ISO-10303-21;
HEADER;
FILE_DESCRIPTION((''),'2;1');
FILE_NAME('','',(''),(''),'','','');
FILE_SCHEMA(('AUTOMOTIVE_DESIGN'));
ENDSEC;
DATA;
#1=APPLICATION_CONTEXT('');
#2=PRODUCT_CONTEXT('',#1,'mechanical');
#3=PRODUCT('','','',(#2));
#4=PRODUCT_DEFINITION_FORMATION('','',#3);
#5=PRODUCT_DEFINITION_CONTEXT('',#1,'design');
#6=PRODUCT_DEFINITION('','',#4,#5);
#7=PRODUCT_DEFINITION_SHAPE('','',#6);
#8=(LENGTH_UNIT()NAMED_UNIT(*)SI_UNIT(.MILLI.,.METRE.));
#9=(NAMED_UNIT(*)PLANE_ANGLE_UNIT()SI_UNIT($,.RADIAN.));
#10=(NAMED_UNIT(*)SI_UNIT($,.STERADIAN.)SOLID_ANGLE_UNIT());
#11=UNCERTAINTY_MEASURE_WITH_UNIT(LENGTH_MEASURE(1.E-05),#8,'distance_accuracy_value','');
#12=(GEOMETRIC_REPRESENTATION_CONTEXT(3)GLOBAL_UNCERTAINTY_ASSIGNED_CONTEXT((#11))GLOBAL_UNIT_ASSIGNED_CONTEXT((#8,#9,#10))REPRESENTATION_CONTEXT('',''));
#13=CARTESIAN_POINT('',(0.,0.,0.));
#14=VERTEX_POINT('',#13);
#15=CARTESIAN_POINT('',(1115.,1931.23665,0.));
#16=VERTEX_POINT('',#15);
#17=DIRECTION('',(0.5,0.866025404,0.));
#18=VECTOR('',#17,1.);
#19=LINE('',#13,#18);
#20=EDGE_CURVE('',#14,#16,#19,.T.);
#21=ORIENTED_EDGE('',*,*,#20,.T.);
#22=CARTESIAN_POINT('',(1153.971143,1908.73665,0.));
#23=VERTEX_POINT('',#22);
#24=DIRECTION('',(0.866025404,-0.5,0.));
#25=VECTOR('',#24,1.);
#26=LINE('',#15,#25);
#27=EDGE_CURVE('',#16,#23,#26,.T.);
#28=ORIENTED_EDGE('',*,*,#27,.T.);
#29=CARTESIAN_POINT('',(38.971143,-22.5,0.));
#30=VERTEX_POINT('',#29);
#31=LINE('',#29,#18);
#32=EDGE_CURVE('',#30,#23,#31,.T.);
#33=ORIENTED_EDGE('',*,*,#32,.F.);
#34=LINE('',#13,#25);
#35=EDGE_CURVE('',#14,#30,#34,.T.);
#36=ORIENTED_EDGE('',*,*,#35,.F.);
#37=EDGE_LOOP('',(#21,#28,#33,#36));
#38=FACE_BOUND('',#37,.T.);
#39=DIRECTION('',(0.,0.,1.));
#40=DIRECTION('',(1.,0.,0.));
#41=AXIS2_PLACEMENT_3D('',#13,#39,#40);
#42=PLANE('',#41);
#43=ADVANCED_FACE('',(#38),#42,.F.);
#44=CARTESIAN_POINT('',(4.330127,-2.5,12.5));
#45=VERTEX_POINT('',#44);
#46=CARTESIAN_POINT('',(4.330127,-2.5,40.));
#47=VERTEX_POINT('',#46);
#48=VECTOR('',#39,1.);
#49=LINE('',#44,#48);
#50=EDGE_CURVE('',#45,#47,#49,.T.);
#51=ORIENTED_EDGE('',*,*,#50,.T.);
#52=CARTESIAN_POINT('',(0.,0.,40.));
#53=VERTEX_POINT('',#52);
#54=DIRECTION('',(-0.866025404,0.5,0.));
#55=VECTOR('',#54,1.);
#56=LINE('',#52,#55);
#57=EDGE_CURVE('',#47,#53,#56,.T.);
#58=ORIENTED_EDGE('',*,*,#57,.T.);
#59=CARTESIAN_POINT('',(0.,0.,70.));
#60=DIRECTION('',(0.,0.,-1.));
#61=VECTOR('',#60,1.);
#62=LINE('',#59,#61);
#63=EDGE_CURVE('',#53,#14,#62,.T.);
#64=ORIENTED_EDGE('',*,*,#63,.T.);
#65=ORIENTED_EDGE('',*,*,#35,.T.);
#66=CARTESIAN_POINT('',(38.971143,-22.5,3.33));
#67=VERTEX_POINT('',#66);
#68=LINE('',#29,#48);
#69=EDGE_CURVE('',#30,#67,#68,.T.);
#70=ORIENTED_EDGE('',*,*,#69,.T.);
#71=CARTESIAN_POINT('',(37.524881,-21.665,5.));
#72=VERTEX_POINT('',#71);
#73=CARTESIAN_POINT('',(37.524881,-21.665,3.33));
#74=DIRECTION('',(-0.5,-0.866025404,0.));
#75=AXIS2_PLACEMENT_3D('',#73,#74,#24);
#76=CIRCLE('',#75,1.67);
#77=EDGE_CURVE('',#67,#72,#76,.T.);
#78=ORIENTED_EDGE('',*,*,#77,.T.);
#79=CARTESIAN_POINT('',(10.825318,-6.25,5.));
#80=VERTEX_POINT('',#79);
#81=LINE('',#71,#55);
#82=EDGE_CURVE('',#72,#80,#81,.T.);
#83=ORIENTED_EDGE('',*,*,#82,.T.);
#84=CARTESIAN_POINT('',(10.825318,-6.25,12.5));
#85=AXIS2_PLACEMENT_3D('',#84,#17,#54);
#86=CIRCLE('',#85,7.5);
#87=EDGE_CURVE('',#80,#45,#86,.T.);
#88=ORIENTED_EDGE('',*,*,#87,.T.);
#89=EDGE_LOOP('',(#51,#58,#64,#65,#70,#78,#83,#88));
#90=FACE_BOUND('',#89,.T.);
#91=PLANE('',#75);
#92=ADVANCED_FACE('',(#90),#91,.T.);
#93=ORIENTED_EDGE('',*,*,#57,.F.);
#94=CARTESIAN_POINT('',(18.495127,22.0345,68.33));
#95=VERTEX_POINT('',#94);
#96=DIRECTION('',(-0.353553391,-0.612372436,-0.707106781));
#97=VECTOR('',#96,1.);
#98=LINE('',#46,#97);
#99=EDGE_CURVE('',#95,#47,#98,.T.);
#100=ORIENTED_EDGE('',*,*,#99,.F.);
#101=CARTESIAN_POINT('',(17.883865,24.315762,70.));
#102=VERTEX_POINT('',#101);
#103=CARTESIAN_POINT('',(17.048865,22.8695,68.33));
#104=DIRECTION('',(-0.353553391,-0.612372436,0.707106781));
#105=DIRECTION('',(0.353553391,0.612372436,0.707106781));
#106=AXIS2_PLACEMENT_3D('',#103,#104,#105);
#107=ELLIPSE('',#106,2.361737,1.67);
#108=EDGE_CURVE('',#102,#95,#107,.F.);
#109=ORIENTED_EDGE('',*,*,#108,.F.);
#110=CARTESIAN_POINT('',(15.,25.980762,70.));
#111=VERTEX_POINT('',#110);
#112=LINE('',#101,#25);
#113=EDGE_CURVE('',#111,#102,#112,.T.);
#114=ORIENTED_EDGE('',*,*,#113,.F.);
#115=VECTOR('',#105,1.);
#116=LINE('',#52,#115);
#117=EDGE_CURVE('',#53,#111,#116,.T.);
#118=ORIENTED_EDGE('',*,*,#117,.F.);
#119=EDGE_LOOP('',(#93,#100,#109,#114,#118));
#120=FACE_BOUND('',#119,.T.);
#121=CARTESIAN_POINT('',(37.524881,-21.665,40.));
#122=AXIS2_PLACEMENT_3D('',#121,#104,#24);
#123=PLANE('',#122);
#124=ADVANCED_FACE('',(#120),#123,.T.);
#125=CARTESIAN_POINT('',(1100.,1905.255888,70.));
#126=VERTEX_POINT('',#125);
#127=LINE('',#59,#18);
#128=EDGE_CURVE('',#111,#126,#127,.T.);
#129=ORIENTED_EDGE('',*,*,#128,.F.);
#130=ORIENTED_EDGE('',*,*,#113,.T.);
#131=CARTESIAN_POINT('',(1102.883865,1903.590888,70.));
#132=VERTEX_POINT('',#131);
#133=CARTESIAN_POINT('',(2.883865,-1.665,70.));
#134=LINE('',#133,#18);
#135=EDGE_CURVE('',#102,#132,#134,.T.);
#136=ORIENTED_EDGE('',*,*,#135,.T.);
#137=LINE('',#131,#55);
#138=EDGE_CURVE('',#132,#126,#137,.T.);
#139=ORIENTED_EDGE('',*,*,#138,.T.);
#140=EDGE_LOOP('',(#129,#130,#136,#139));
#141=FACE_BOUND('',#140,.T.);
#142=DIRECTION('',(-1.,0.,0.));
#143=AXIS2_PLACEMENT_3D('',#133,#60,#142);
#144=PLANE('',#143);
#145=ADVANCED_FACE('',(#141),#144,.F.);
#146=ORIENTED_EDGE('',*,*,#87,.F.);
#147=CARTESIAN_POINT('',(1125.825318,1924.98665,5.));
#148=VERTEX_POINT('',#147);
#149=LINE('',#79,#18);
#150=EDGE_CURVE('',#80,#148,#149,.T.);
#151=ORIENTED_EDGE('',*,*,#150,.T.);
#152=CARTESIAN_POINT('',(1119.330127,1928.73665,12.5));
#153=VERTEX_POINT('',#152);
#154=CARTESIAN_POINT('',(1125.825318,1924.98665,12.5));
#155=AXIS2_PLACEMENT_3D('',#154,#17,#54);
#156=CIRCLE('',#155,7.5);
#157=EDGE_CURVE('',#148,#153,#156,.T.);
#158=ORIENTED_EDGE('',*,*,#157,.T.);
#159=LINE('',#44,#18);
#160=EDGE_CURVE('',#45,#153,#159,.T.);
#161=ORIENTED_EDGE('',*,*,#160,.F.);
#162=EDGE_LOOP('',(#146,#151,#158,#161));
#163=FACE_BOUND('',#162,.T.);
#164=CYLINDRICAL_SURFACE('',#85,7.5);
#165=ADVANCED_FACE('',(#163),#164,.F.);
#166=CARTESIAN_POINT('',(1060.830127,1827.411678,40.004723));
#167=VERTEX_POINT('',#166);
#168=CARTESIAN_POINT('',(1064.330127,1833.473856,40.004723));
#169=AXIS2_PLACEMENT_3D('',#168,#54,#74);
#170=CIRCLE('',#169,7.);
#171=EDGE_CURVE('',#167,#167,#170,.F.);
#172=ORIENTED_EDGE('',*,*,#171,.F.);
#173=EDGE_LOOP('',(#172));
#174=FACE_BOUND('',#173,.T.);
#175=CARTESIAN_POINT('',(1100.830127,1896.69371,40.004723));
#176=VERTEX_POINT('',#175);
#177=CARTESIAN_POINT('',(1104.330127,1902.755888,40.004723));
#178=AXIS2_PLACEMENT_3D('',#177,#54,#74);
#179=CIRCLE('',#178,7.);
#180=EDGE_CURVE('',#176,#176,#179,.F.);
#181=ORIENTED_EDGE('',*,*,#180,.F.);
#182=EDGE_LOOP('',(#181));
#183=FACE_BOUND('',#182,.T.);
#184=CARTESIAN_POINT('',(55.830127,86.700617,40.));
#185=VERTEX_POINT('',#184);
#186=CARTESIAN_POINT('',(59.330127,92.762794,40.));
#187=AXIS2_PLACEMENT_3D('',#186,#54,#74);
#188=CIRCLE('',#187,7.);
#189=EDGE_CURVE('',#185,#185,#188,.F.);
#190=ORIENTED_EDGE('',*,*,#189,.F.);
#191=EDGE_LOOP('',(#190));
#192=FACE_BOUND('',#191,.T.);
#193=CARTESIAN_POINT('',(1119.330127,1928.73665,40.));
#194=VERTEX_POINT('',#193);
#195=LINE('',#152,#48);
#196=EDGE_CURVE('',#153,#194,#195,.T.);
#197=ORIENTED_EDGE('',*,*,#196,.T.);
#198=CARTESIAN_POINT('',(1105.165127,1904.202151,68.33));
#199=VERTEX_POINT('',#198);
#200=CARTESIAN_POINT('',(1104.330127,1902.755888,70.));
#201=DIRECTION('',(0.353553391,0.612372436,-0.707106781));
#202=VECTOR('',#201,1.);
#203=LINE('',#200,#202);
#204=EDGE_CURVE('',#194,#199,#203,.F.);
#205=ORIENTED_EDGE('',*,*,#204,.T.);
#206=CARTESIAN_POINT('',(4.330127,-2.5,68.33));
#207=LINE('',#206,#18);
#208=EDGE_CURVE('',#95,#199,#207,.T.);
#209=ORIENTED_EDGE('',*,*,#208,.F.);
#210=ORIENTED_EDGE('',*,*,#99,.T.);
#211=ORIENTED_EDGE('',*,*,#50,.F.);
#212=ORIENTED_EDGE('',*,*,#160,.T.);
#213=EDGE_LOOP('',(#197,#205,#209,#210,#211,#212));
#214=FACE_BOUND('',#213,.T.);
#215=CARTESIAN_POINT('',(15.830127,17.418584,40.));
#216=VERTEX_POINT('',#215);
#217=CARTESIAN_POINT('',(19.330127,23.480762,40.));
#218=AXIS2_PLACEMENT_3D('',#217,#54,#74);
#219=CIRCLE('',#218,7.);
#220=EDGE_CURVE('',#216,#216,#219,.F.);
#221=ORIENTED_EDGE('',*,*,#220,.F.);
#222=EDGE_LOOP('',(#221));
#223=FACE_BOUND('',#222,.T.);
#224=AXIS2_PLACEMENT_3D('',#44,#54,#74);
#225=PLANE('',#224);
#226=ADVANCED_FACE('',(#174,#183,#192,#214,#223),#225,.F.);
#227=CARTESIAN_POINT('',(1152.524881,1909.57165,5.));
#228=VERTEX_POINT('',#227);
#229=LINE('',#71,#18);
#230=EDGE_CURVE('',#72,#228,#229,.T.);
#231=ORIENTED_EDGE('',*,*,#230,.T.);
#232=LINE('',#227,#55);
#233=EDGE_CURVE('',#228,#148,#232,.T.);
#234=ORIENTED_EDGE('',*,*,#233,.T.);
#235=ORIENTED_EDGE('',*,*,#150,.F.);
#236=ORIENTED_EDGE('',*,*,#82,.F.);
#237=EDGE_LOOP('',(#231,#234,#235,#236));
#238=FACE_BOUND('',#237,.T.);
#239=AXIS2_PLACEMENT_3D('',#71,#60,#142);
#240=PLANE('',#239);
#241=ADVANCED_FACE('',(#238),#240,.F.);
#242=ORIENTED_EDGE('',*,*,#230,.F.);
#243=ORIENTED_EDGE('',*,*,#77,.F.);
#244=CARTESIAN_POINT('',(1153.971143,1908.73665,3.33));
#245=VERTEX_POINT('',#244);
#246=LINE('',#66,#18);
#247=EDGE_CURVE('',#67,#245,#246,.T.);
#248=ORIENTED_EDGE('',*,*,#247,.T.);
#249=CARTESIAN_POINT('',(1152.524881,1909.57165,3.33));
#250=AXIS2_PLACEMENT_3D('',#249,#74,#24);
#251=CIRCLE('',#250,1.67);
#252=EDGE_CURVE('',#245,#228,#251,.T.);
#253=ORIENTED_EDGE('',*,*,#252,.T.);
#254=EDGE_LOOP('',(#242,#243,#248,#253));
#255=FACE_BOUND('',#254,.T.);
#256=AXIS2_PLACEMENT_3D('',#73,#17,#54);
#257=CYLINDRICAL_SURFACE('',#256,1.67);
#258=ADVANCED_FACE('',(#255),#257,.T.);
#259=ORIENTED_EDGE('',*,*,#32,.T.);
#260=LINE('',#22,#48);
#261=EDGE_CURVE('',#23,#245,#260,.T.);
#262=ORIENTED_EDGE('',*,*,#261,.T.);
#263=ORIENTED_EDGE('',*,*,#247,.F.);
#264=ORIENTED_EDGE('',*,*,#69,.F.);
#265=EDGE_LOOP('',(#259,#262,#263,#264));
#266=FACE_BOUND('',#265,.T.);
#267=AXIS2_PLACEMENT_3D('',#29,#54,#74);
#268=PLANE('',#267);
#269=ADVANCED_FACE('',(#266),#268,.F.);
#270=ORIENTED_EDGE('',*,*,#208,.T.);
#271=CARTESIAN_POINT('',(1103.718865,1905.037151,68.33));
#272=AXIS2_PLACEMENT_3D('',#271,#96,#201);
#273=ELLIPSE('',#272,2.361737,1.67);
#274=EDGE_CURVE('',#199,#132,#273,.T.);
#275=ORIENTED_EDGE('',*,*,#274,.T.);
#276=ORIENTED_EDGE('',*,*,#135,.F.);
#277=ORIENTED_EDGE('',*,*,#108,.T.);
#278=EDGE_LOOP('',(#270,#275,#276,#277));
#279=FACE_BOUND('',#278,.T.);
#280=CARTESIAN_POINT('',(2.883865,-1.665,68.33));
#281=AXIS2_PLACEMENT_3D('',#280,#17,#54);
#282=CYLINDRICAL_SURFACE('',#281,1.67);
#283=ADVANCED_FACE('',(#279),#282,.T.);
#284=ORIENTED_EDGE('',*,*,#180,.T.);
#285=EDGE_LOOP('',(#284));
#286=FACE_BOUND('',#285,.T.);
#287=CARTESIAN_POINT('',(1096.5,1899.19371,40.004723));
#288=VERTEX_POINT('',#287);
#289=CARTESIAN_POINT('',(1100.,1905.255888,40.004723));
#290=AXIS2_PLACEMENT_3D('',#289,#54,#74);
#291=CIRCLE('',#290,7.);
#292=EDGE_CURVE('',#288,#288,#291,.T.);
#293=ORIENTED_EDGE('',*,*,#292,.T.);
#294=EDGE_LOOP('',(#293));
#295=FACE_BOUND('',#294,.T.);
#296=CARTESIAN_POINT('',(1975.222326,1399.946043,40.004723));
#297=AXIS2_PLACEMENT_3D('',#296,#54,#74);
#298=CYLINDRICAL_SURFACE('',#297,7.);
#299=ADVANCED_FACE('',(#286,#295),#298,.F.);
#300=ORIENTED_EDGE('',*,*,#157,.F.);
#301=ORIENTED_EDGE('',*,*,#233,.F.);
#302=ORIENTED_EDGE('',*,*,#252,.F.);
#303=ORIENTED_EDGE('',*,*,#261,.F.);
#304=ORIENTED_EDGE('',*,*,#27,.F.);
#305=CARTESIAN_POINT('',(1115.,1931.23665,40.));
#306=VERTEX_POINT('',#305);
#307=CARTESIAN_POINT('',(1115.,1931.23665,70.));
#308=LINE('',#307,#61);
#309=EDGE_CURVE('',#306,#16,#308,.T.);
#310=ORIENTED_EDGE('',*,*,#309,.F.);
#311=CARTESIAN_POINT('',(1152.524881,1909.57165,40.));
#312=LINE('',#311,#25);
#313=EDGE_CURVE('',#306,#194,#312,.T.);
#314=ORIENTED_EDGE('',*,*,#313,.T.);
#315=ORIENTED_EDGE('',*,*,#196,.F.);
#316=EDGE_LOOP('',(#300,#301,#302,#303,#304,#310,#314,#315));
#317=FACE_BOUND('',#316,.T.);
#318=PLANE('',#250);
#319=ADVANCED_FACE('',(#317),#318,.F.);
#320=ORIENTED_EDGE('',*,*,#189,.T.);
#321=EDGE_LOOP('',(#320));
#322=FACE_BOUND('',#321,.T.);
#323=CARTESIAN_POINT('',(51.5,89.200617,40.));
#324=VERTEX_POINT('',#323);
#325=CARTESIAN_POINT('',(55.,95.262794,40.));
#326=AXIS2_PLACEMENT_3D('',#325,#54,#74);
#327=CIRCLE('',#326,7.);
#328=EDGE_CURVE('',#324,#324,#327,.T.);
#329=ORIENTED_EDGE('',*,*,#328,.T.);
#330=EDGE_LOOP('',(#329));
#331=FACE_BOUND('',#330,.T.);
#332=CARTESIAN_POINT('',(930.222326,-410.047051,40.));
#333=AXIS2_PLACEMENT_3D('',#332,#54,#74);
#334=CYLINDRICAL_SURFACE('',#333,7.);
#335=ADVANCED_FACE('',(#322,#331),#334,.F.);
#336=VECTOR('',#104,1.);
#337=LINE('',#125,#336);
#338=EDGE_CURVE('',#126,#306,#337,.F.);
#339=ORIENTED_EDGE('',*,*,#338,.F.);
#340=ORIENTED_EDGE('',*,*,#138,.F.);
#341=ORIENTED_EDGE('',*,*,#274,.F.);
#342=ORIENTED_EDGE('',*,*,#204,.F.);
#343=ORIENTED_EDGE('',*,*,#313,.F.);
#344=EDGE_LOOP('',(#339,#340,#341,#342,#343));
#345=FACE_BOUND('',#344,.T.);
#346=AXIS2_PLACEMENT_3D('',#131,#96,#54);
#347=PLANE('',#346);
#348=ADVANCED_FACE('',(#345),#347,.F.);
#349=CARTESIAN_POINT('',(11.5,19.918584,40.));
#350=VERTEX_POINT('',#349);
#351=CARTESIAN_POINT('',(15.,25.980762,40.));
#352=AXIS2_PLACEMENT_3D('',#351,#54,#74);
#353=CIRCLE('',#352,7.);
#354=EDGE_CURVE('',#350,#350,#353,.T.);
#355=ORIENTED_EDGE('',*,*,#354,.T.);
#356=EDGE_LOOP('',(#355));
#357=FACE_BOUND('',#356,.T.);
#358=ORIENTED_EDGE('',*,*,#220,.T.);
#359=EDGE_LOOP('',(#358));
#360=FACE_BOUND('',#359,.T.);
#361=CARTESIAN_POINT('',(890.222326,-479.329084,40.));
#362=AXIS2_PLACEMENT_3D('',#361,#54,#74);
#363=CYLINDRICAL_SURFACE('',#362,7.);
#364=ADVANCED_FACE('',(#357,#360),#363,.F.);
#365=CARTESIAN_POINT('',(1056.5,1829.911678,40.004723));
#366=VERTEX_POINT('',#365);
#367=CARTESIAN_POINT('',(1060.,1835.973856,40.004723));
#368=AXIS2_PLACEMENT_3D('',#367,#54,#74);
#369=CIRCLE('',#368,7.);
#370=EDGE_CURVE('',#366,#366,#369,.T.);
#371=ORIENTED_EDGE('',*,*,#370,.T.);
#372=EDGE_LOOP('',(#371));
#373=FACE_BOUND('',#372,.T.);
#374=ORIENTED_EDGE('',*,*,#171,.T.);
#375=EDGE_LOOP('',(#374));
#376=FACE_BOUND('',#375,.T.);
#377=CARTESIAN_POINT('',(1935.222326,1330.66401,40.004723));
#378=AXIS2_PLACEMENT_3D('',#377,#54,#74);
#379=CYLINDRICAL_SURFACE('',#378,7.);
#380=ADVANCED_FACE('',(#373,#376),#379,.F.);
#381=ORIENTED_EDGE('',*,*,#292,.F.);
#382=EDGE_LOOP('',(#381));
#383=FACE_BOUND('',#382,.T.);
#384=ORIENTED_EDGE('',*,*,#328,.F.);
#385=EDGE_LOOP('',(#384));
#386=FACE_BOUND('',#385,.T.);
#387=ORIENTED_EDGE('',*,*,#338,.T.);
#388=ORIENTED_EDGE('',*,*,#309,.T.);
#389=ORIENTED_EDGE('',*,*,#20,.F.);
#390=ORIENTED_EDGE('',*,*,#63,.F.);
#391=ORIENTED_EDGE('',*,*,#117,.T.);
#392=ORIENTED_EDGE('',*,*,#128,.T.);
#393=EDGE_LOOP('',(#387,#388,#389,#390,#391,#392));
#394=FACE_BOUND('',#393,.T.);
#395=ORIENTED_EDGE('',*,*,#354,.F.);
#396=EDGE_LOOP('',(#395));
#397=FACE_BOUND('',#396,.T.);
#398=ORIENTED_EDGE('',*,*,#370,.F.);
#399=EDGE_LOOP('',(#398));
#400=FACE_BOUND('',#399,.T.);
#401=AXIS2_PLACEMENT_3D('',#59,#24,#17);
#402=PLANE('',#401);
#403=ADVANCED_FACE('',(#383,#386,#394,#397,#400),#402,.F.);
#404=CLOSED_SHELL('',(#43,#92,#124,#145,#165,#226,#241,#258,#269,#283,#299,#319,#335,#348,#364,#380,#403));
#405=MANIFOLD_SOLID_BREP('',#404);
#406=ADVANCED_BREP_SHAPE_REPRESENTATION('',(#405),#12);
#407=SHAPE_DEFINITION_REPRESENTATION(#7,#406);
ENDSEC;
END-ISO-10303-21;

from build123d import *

# Parameters (mm, degrees)
F_70X45X5_1_DEPTH   = 2230
CUT_EXTRUDE_1_REACH = 2252.827
SKETCH_12_R         = 7
CUT_EXTRUDE_2_REACH = 2252.827
SKETCH_13_R         = 7
CHAMFER_1_SIZE      = 30
CHAMFER_2_SIZE      = 30


with BuildPart() as part:
    # 草图11 → 不等边角钢 70X45X5(1) (new body)
    with BuildSketch(Plane(origin=(1115, 1931.236650439, 0), x_dir=(0.86602540378444, -0.49999999999999784, 0), z_dir=(-0.49999999999999784, -0.86602540378444, 0))):
        with BuildLine():
            Line((0, 70), (0, 0))
            Line((0, 0), (45, 0))
            Line((45, 0), (45, 3.33))
            ThreePointArc((45, 3.33), (44.510868325, 4.510868325), (43.33, 5))
            Line((43.33, 5), (12.5, 5))
            ThreePointArc((12.5, 5), (7.196699141, 7.196699141), (5, 12.5))
            Line((5, 12.5), (5, 68.33))
            ThreePointArc((5, 68.33), (4.510868325, 69.510868325), (3.33, 70))
            Line((3.33, 70), (0, 70))
        make_face()
    extrude(amount=F_70X45X5_1_DEPTH)

    # 草图12 → 切除-拉伸1 (cut, up to next)
    with BuildSketch(Plane(origin=(0, 0, 0), x_dir=(0, 0, 1), z_dir=(-0.86602540378444, 0.49999999999999784, 0)), mode=Mode.PRIVATE) as cut_extrude_1_sk1:
        with Locations(Location((40, 30, 0), (0, 0, 270))):
            Circle(SKETCH_12_R)
    cut_extrude_1_tool1 = extrude(cut_extrude_1_sk1.sketch, amount=-CUT_EXTRUDE_1_REACH, mode=Mode.PRIVATE) & part.part
    # 草图12 → 切除-拉伸1 (cut, up to next)
    with BuildSketch(Plane(origin=(0, 0, 0), x_dir=(0, 0, 1), z_dir=(-0.86602540378444, 0.49999999999999784, 0)), mode=Mode.PRIVATE) as cut_extrude_1_sk2:
        with Locations(Location((40, 110, 0), (0, 0, 270))):
            Circle(SKETCH_12_R)
    cut_extrude_1_tool2 = extrude(cut_extrude_1_sk2.sketch, amount=-CUT_EXTRUDE_1_REACH, mode=Mode.PRIVATE) & part.part
    add(cut_extrude_1_tool1.solids().sort_by_distance((15, 25.980762, 40))[0], mode=Mode.SUBTRACT)
    add(cut_extrude_1_tool2.solids().sort_by_distance((55, 95.262794, 40))[0], mode=Mode.SUBTRACT)

    # 草图13 → 切除-拉伸2 (cut, up to next)
    with BuildSketch(Plane(origin=(0, 0, 0), x_dir=(0, 0, 1), z_dir=(-0.86602540378444, 0.49999999999999784, 0)), mode=Mode.PRIVATE) as cut_extrude_2_sk1:
        with Locations(Location((40.004723234, 2120, 0), (0, 0, 270))):
            Circle(SKETCH_13_R)
    cut_extrude_2_tool1 = extrude(cut_extrude_2_sk1.sketch, amount=-CUT_EXTRUDE_2_REACH, mode=Mode.PRIVATE) & part.part
    # 草图13 → 切除-拉伸2 (cut, up to next)
    with BuildSketch(Plane(origin=(0, 0, 0), x_dir=(0, 0, 1), z_dir=(-0.86602540378444, 0.49999999999999784, 0)), mode=Mode.PRIVATE) as cut_extrude_2_sk2:
        with Locations(Location((40.004723234, 2200, 0), (0, 0, 270))):
            Circle(SKETCH_13_R)
    cut_extrude_2_tool2 = extrude(cut_extrude_2_sk2.sketch, amount=-CUT_EXTRUDE_2_REACH, mode=Mode.PRIVATE) & part.part
    add(cut_extrude_2_tool1.solids().sort_by_distance((1060, 1835.973856, 40.004723))[0], mode=Mode.SUBTRACT)
    add(cut_extrude_2_tool2.solids().sort_by_distance((1100, 1905.255888, 40.004723))[0], mode=Mode.SUBTRACT)

    # 倒角1
    # the kernel refuses this chamfer: 30 mm, written as the material it takes off along each edge
    with BuildSketch(Plane(origin=(1184.698148536, 1890.99640562, 70), x_dir=(-0.49981095845564616, -0.8656979742248816, 0.02749587661058632), z_dir=(-0.86602540378444, 0.49999999999999784, 0))) as chamfer_1_piece_1:
        Polygon((CHAMFER_1_SIZE * 0.999621916911, -CHAMFER_1_SIZE * 0.0274958766106), (-CHAMFER_1_SIZE * 0.0274958766106, -CHAMFER_1_SIZE * 0.999621916911), (0, 0), align=None)
    extrude(amount=157.630979278, mode=Mode.SUBTRACT)

    # 倒角2
    # the kernel refuses this chamfer: 30 mm, written as the material it takes off along each edge
    with BuildSketch(Plane(origin=(69.698148536, -40.240244819, 70), x_dir=(-0.013747938305293054, -0.023812127644090075, -0.9996219169112966), z_dir=(-0.86602540378444, 0.49999999999999784, 0))) as chamfer_2_piece_1:
        Polygon((CHAMFER_2_SIZE * 0.999621916911, -CHAMFER_2_SIZE * 0.0274958766106), (-CHAMFER_2_SIZE * 0.0274958766106, -CHAMFER_2_SIZE * 0.999621916911), (0, 0), align=None)
    extrude(amount=157.630979278, mode=Mode.SUBTRACT)


solid = part.part
